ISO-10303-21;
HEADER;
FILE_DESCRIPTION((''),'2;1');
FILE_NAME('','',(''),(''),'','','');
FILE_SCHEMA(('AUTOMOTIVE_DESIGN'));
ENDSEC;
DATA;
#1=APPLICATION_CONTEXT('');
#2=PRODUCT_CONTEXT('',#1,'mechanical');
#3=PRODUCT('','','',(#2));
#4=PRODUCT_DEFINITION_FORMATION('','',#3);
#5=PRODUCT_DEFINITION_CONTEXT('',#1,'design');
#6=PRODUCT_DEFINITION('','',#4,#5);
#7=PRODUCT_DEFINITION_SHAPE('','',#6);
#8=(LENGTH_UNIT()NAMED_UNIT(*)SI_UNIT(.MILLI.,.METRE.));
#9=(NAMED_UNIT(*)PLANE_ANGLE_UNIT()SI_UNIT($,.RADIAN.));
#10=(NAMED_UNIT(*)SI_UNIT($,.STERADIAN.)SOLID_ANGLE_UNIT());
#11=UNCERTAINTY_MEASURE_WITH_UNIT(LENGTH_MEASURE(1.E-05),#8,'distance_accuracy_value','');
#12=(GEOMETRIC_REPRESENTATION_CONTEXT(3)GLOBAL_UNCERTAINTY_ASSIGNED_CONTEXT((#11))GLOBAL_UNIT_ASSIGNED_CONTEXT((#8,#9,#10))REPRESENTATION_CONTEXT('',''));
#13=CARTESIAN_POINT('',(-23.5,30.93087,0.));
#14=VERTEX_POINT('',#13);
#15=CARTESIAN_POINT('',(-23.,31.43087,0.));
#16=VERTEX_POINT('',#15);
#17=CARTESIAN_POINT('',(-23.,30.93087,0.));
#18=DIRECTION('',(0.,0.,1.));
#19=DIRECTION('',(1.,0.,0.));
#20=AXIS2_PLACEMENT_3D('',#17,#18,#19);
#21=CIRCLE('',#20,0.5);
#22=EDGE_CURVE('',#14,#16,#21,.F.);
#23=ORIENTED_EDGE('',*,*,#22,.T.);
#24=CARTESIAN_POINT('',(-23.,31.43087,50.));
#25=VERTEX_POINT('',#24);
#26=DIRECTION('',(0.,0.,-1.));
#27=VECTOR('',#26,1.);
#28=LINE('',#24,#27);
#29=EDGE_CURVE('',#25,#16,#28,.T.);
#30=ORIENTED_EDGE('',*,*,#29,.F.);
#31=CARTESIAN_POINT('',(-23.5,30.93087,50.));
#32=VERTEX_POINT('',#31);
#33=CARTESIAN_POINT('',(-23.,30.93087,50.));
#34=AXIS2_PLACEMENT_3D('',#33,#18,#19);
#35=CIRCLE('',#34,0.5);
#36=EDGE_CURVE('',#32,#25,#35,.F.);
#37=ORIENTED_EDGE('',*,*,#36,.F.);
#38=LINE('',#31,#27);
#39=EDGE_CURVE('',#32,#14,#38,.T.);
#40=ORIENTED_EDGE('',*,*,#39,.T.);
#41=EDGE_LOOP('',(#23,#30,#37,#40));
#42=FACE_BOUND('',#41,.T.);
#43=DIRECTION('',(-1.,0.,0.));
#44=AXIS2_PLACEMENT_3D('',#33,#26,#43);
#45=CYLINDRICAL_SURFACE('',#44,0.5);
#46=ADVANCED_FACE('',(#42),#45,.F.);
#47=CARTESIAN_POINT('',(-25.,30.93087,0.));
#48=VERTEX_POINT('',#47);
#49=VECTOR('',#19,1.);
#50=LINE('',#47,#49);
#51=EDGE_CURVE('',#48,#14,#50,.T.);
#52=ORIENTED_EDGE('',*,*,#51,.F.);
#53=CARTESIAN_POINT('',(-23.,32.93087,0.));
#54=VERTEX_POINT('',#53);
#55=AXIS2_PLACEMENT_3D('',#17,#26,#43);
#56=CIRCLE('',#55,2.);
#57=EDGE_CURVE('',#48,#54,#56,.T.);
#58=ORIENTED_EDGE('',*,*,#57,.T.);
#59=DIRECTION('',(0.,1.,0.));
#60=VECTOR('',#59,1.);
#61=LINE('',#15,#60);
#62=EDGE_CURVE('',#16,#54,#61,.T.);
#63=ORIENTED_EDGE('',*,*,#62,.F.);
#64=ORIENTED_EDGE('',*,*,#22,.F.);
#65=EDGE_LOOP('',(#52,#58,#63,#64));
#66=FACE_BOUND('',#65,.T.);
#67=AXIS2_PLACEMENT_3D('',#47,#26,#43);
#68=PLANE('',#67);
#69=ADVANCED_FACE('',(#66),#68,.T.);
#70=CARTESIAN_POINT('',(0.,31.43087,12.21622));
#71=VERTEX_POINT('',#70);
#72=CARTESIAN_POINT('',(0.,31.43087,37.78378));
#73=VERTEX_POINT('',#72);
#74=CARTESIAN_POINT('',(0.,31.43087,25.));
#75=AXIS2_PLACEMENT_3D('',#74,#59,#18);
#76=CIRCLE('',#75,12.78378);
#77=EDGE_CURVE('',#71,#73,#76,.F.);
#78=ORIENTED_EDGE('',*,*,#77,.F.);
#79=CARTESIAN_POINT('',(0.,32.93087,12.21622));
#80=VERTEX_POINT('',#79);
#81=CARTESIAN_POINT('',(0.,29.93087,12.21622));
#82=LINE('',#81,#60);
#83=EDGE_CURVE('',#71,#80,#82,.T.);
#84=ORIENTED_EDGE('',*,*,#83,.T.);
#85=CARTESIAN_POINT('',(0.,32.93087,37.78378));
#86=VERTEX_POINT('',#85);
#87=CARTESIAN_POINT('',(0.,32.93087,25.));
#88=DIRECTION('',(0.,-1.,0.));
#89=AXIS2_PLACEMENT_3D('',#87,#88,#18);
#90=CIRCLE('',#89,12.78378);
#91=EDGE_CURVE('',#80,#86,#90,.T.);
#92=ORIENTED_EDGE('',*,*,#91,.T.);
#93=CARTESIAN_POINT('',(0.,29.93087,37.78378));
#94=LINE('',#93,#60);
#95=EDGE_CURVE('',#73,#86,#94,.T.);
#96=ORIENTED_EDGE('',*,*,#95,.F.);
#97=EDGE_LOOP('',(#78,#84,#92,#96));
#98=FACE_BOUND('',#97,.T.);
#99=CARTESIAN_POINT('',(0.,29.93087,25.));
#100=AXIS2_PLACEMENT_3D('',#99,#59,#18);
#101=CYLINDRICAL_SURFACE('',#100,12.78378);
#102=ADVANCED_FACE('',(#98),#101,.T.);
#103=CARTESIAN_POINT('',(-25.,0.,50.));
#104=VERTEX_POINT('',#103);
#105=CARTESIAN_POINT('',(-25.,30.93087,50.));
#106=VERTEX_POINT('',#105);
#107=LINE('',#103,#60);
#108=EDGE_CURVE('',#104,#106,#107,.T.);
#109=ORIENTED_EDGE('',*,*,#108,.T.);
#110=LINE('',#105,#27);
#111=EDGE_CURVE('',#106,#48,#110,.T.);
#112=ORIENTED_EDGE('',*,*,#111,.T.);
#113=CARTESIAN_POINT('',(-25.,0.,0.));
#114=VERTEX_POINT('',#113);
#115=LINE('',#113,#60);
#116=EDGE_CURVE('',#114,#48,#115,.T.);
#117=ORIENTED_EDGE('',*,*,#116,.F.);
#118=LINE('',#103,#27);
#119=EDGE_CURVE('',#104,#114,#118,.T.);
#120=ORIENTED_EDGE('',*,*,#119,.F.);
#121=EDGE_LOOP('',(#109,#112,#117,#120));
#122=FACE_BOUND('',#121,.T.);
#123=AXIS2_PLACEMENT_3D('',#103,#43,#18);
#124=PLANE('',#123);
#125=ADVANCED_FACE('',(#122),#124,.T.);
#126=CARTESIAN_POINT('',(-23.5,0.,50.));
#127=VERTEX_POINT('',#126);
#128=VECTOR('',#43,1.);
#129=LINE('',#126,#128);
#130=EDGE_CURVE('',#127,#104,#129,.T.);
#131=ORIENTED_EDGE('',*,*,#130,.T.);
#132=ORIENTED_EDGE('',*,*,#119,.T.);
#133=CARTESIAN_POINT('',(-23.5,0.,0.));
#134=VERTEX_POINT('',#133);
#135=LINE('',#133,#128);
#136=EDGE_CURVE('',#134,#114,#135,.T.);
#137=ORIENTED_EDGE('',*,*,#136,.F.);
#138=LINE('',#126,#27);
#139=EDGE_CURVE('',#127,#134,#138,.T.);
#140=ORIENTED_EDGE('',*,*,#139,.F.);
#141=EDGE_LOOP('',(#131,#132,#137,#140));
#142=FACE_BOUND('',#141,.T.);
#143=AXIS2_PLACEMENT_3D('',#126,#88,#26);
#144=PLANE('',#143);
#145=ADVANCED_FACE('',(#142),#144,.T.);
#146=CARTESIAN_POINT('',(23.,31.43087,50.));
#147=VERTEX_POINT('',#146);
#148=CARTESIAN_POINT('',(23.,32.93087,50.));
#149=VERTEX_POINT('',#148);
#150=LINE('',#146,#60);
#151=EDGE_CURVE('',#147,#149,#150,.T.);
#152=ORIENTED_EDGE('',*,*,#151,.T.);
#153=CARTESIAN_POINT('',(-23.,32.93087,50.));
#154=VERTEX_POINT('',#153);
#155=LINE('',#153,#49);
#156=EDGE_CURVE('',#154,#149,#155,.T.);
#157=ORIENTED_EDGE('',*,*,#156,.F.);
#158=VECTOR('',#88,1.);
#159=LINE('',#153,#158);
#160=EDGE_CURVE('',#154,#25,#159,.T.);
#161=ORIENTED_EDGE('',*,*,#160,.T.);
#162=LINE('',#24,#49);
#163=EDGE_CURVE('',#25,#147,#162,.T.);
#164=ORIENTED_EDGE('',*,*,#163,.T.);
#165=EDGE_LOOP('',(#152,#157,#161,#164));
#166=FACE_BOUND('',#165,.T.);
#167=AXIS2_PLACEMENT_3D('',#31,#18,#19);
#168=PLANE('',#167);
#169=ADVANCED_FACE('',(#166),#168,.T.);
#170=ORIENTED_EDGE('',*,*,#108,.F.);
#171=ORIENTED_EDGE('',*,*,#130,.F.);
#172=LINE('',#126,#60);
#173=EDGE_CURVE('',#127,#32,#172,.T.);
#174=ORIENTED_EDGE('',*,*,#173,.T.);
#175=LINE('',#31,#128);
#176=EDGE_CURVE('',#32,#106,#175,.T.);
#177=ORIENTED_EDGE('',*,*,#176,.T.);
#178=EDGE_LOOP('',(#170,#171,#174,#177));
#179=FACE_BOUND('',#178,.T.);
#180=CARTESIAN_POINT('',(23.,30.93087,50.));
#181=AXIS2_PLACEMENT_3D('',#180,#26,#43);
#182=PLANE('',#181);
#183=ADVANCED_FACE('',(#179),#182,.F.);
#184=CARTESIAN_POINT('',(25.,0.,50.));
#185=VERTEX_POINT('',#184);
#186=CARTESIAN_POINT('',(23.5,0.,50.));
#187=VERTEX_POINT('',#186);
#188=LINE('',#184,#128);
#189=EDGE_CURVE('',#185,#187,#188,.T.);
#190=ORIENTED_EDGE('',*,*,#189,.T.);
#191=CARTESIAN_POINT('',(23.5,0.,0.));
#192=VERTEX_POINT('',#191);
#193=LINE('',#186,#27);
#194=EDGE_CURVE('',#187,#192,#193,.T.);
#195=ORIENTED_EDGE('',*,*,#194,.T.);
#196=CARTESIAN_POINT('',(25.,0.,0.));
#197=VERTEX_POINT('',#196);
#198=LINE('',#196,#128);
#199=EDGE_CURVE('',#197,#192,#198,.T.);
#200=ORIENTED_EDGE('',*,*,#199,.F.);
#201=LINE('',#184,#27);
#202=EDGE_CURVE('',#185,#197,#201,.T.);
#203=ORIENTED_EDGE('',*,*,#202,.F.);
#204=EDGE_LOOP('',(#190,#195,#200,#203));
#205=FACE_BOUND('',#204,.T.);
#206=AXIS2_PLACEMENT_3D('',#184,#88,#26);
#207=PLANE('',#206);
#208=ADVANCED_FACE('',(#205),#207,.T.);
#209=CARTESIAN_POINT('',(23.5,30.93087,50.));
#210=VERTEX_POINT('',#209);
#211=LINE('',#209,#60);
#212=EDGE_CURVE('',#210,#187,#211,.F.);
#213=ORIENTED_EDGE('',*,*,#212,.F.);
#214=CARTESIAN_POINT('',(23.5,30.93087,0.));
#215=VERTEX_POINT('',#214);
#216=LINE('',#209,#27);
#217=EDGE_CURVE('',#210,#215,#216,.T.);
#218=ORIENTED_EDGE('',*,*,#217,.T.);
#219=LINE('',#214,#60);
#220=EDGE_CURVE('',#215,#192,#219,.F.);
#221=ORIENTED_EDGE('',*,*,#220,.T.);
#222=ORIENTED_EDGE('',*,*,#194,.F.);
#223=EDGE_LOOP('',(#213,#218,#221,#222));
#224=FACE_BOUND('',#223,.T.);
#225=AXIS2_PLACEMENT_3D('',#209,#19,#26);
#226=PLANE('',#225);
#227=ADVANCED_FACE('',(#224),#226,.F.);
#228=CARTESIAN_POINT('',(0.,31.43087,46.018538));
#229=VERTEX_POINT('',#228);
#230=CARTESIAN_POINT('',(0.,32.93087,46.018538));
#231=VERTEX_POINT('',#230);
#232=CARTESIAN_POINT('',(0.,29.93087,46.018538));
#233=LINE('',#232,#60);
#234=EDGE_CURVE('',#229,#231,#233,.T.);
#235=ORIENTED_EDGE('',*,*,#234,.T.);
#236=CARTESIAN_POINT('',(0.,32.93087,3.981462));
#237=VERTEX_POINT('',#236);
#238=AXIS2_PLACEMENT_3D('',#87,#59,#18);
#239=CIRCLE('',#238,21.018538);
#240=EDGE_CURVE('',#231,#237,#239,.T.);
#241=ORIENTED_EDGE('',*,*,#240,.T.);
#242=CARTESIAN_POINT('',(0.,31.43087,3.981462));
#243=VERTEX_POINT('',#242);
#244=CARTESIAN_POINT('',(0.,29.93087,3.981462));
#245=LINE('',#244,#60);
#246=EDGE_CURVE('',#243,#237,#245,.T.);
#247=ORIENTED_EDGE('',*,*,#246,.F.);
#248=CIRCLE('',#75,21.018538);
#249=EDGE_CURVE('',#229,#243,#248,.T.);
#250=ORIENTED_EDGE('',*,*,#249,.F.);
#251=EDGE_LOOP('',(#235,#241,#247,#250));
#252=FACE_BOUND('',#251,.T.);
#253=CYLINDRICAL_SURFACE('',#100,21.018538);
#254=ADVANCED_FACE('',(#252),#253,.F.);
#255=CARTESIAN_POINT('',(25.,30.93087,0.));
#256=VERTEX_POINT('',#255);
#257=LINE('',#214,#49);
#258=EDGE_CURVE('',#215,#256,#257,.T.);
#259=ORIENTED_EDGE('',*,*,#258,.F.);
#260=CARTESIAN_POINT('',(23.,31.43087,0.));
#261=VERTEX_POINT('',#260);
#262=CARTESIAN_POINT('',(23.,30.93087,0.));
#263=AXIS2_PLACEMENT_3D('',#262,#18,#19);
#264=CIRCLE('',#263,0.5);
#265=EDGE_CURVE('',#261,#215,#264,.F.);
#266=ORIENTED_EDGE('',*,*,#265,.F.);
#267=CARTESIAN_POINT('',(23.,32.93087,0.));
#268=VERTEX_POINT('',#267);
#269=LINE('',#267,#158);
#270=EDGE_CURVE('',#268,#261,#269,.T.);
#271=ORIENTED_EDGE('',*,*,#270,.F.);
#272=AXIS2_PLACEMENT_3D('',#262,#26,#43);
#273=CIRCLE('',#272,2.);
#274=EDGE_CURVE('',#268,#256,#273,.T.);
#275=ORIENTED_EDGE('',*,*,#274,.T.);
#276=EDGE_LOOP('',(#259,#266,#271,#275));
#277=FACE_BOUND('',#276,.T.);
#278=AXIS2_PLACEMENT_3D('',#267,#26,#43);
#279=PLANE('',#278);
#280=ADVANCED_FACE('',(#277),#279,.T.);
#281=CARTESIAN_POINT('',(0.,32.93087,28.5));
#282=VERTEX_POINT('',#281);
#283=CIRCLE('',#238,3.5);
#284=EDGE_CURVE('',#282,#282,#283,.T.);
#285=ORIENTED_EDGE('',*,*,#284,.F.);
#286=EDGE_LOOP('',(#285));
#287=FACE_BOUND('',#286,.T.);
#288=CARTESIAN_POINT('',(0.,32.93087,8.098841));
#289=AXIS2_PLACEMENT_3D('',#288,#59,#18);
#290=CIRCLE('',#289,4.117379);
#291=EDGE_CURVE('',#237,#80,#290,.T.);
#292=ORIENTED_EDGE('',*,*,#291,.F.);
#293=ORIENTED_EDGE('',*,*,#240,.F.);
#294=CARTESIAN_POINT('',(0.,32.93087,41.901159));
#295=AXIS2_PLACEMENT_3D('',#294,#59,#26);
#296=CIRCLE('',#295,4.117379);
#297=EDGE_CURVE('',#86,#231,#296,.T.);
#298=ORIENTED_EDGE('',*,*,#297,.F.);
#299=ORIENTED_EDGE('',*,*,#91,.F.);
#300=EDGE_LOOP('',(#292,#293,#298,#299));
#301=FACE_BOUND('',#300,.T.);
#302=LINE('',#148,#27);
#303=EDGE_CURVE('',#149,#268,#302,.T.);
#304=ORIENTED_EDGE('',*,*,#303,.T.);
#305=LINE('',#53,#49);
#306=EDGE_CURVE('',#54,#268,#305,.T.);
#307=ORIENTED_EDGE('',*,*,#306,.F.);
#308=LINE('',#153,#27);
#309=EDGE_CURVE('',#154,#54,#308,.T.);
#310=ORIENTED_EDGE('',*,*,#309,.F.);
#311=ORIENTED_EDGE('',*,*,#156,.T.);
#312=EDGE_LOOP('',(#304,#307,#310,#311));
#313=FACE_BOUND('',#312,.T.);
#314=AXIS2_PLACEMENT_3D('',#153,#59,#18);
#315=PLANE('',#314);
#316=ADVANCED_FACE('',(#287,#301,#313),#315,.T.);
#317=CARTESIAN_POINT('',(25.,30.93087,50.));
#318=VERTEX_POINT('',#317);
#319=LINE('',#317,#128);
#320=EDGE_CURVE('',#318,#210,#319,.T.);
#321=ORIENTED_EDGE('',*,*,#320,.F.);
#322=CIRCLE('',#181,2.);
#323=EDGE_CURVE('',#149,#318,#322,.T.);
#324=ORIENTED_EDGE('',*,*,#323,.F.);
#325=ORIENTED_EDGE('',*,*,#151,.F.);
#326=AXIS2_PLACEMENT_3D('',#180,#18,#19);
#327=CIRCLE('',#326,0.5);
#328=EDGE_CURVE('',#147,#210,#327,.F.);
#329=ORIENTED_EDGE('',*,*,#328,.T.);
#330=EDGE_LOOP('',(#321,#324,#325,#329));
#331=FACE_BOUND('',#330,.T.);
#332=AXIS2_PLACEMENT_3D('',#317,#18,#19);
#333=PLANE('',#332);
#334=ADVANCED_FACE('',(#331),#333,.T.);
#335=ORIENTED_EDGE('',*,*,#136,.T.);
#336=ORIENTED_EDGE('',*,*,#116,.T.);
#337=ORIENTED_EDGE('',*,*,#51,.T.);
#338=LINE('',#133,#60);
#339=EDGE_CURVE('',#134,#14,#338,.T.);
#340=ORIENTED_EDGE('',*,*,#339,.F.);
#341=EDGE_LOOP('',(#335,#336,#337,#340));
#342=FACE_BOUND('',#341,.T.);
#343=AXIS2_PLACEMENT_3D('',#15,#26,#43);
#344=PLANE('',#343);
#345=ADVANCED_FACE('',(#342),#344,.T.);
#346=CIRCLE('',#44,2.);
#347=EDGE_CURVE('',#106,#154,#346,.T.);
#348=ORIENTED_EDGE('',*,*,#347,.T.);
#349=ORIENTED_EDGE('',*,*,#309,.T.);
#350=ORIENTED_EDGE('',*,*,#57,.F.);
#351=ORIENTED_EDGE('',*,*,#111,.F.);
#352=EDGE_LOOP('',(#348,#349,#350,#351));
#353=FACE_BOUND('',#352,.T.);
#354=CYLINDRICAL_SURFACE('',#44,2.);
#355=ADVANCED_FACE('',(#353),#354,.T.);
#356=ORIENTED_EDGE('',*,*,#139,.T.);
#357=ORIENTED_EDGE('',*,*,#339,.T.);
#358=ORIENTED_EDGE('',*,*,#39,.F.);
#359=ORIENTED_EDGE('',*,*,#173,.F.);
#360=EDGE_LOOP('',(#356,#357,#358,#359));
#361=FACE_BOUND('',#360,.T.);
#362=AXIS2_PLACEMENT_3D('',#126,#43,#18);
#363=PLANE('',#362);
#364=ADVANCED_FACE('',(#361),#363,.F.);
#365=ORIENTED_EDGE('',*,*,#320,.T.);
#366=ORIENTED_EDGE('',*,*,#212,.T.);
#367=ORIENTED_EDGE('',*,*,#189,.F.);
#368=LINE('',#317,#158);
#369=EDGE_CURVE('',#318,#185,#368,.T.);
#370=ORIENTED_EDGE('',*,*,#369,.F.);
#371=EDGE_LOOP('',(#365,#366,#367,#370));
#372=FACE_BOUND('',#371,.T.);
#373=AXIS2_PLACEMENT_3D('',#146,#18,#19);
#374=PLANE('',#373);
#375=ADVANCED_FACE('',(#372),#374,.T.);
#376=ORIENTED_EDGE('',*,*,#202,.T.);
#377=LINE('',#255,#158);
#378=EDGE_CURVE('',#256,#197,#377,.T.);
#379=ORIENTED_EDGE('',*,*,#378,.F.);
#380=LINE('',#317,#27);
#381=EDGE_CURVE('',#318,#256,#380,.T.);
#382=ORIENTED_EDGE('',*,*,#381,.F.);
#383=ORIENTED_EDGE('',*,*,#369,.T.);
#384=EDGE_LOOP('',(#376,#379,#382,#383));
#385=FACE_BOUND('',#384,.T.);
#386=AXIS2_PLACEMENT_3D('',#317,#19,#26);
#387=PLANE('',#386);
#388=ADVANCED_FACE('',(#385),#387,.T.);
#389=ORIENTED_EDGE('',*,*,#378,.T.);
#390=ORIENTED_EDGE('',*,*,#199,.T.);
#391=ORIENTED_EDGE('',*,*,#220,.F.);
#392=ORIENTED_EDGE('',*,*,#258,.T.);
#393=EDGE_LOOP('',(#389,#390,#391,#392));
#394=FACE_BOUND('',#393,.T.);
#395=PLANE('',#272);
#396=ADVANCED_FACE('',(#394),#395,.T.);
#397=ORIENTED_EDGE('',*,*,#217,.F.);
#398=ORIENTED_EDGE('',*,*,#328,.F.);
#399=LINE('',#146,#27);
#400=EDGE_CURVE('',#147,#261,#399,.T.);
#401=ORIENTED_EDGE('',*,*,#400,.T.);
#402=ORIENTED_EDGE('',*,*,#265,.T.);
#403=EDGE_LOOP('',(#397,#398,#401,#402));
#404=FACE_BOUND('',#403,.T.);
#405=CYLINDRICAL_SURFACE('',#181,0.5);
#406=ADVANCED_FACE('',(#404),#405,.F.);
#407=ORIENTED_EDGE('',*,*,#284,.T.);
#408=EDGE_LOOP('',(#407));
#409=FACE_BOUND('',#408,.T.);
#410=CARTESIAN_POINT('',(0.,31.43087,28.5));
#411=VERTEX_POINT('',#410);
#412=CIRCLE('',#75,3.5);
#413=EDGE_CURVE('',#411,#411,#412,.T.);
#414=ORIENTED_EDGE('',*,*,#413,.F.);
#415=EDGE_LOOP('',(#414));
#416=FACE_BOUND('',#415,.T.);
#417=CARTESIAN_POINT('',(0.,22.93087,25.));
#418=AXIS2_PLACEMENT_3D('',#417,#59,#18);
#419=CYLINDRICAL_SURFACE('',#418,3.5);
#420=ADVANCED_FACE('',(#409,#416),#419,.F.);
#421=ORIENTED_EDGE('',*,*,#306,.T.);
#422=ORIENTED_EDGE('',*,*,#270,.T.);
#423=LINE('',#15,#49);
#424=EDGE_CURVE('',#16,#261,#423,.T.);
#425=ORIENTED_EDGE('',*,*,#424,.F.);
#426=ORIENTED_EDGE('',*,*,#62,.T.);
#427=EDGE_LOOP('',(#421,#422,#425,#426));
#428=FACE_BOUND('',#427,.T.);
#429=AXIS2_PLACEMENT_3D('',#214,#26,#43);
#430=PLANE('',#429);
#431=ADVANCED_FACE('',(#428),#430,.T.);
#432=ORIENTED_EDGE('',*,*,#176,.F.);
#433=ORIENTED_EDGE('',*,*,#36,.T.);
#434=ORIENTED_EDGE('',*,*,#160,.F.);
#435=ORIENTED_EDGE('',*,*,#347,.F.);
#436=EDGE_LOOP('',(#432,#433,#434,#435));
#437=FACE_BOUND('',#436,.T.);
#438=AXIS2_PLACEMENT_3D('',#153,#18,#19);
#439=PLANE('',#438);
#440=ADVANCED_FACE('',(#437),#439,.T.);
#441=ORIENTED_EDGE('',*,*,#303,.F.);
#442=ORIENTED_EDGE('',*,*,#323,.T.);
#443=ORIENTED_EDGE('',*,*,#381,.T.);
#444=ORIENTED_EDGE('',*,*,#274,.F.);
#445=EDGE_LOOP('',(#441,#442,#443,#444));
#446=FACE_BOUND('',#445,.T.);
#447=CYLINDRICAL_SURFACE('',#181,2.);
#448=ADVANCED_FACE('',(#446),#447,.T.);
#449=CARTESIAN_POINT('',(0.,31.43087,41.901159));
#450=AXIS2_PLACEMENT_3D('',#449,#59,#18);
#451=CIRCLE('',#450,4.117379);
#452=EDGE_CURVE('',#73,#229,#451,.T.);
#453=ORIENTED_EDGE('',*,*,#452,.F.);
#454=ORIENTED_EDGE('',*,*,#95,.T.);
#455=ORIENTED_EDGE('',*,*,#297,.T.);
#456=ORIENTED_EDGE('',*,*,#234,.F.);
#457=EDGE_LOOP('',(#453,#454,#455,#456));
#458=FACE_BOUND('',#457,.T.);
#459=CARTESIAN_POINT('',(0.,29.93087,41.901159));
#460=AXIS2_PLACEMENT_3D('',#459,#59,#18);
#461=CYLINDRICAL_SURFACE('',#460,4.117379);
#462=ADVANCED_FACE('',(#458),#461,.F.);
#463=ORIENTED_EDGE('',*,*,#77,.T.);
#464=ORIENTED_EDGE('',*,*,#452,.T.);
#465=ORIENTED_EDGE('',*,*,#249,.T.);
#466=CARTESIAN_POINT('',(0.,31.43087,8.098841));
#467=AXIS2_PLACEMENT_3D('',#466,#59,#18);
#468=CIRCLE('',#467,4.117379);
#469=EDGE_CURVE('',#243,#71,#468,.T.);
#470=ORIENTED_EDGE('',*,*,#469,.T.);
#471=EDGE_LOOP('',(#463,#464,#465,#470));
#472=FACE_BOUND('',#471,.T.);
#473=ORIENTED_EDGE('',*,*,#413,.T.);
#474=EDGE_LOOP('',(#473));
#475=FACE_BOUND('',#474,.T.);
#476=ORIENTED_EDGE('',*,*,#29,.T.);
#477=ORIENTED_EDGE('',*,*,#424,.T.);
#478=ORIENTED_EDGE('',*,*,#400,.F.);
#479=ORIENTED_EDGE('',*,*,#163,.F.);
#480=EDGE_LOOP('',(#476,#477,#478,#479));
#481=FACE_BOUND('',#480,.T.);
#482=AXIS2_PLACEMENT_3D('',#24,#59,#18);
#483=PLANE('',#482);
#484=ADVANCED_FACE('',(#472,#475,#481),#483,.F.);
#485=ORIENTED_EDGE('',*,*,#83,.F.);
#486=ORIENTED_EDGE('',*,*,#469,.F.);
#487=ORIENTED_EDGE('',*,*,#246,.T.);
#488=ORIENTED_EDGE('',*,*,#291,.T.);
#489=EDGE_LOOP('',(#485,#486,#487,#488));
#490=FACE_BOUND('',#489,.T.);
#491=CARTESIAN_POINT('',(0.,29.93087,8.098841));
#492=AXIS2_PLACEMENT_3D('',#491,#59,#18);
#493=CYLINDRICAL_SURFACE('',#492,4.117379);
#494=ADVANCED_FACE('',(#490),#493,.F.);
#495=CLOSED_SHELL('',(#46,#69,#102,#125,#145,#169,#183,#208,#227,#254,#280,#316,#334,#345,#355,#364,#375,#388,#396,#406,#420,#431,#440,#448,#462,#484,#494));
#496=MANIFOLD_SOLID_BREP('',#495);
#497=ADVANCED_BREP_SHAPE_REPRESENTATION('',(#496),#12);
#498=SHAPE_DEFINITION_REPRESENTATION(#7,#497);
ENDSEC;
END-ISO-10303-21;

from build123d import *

# Parameters (mm, degrees)
BASE_FLANGE1_DEPTH = 50
SKETCH2_R          = 3.5
CUT_EXTRUDE1_DEPTH = 10
CUT_EXTRUDE2_DEPTH = 3


# Sheet-metal steps are written as plain solids
with BuildPart() as part:
    # Sketch1 → Base-Flange1 (new body)
    with BuildSketch(Plane.XY):
        with BuildLine():
            Line((-25, 0), (-25, 30.930870366))
            ThreePointArc((-25, 30.930870366), (-24.414213562, 32.345083928), (-23, 32.930870366))
            Line((-23, 32.930870366), (23, 32.930870366))
            ThreePointArc((23, 32.930870366), (24.414213562, 32.345083928), (25, 30.930870366))
            Line((25, 30.930870366), (25, 0))
            Line((25, 0), (23.5, 0))
            Line((23.5, 0), (23.5, 30.930870366))
            ThreePointArc((23.5, 30.930870366), (23.353553391, 31.284423757), (23, 31.430870366))
            Line((23, 31.430870366), (-23, 31.430870366))
            ThreePointArc((-23, 31.430870366), (-23.353553391, 31.284423757), (-23.5, 30.930870366))
            Line((-23.5, 30.930870366), (-23.5, 0))
            Line((-23.5, 0), (-25, 0))
        make_face()
    extrude(amount=BASE_FLANGE1_DEPTH)

    # Sketch2 → Cut-Extrude1 (cut)
    with BuildSketch(Plane(origin=(0, 32.930870366, 0), x_dir=(1, 0, 0), z_dir=(0, 1, 0))):
        with Locations(Location((0, -25, 0), (0, 0, 270))):
            Circle(SKETCH2_R)
    extrude(amount=-CUT_EXTRUDE1_DEPTH, mode=Mode.SUBTRACT)

    # Sketch3 → Cut-Extrude2 (cut)
    with BuildSketch(Plane(origin=(0, 32.930870366, 0), x_dir=(1, 0, 0), z_dir=(0, 1, 0))):
        with BuildLine():
            ThreePointArc((0, -37.783779882), (12.783779882, -25), (0, -12.216220118))
            ThreePointArc((0, -12.216220118), (-4.117379141, -8.098840977), (0, -3.981461837))
            ThreePointArc((0, -3.981461837), (21.018538163, -25), (0, -46.018538163))
            ThreePointArc((0, -46.018538163), (-4.117379141, -41.901159023), (0, -37.783779882))
        make_face()
    extrude(amount=-CUT_EXTRUDE2_DEPTH, mode=Mode.SUBTRACT)


solid = part.part
